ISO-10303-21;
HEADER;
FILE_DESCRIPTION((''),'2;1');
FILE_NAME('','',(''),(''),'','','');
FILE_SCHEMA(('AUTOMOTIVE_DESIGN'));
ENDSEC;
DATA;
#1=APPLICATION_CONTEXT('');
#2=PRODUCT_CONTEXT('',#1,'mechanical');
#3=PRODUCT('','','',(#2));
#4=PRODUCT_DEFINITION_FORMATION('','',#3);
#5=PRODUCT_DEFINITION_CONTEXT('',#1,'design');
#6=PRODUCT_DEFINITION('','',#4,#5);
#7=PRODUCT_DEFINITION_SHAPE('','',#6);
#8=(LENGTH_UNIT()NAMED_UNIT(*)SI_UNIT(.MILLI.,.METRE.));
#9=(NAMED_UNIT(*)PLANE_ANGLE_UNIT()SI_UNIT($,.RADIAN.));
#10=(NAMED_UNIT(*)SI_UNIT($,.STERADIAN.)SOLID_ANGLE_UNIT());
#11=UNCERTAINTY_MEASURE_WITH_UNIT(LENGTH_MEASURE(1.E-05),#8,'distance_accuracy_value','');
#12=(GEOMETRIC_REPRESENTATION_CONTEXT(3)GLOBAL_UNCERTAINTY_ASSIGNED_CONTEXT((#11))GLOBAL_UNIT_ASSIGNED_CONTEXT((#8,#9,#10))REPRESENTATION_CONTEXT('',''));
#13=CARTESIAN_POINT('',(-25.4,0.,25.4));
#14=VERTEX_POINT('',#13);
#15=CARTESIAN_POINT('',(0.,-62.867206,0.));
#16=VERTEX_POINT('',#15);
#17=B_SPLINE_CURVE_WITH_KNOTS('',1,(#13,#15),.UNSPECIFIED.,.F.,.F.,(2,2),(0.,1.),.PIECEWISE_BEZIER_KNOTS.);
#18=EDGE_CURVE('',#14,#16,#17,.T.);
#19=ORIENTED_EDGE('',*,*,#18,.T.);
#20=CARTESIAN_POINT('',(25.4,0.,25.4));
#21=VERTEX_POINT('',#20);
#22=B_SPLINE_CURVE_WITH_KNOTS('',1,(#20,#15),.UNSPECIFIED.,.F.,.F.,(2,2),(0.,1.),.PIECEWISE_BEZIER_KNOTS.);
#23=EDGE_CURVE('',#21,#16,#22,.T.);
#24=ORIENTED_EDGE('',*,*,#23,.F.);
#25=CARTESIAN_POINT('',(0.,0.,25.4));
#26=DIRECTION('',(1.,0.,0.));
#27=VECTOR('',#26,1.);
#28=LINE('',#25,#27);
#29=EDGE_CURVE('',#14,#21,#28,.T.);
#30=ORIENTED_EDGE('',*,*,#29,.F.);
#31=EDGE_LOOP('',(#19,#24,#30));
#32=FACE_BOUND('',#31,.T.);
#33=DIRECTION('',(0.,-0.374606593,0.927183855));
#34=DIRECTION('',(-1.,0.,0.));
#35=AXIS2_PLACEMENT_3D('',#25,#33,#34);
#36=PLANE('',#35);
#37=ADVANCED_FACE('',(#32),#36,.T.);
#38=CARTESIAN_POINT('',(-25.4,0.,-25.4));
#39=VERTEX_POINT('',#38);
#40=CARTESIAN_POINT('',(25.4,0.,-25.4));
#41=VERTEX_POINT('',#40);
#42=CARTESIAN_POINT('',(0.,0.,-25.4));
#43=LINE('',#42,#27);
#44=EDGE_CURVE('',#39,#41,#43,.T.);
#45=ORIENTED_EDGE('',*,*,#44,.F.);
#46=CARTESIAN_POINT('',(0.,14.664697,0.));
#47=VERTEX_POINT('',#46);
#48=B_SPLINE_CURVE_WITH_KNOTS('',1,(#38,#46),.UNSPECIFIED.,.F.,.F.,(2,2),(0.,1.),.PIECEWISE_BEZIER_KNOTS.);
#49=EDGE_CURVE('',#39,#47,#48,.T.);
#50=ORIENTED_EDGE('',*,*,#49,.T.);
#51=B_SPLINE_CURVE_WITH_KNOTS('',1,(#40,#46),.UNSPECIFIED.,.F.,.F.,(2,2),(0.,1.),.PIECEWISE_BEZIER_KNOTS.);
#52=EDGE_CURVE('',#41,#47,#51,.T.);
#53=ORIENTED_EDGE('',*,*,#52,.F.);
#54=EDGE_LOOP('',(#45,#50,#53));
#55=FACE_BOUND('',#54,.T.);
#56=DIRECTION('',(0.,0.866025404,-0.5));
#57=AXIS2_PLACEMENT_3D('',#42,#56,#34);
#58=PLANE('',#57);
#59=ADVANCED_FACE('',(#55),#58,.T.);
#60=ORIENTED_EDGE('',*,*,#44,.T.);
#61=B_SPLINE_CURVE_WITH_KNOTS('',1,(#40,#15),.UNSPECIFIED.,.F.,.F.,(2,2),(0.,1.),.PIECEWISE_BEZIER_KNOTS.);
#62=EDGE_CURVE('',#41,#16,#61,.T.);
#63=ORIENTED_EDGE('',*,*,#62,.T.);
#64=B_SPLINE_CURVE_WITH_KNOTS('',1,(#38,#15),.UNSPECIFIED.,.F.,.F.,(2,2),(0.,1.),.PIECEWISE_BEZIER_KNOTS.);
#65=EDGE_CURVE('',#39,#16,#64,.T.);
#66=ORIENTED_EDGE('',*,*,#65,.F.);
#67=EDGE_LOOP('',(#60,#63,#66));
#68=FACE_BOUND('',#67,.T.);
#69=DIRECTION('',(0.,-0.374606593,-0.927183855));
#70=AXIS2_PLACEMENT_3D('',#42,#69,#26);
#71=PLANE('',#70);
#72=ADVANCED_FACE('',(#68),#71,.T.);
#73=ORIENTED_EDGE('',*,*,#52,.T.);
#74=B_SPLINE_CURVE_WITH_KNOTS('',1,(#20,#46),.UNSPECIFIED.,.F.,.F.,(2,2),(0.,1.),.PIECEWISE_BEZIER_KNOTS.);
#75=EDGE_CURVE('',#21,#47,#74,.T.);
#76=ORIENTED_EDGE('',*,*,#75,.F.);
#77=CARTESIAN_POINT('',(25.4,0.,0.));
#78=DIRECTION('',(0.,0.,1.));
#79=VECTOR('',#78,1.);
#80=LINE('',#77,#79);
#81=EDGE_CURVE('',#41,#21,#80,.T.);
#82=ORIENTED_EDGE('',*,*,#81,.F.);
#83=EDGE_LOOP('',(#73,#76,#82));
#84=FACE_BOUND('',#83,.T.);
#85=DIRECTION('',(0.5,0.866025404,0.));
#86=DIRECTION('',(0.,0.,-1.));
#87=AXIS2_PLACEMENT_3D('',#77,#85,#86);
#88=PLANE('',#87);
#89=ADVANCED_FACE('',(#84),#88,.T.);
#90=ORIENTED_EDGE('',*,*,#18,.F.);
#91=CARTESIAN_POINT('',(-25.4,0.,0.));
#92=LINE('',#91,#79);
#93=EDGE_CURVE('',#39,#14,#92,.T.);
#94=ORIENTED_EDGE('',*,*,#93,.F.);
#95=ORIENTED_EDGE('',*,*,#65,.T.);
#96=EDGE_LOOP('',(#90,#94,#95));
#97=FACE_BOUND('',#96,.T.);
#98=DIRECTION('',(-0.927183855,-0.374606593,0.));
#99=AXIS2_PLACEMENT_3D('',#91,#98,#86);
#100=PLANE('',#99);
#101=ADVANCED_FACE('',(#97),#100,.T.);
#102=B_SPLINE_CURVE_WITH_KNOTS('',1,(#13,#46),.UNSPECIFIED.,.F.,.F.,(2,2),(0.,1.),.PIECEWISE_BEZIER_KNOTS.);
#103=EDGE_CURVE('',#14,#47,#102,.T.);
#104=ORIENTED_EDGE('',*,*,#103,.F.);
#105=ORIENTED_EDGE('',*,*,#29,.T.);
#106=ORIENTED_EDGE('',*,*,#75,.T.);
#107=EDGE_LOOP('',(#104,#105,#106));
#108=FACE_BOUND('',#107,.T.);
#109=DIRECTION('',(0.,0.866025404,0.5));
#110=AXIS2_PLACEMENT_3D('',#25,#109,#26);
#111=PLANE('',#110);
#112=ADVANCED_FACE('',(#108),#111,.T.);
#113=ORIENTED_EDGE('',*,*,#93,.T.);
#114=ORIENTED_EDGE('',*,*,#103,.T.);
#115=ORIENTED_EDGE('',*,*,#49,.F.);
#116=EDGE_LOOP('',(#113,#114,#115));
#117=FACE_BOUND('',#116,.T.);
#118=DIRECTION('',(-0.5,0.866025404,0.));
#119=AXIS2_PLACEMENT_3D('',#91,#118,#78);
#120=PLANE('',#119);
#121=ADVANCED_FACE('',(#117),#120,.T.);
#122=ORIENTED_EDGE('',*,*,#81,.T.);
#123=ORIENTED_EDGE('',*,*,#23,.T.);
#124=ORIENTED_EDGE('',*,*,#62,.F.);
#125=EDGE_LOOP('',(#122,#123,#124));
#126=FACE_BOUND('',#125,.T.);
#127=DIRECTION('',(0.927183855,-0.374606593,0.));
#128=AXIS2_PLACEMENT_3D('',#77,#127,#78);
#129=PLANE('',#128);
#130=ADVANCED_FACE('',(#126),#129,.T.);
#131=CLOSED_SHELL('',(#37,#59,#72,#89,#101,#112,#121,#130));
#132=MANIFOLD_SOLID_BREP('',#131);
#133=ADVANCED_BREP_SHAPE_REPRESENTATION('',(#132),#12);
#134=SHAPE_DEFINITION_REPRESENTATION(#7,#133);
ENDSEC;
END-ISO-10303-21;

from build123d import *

# Parameters (mm, degrees)
F0_W      = 50.8
F0_H      = 50.8
F1_FACE_W = 50.8
F1_FACE_H = 50.8


# Not quite as in the source:
# - an extrude whose draft closes it to a point is written as a loft to that point


with BuildPart() as f1:
    # F0 (on Front) → F1 section 0
    with BuildSketch(Plane.XZ, mode=Mode.PRIVATE) as f1_s0:
        Rectangle(F0_W, F0_H)
    loft([f1_s0.sketch, Vertex(0, -62.8672060768, 0)], ruled=True)

    # F1_face (on face) → F2 section 0
    with BuildSketch(Plane(origin=(0, 0, 0), x_dir=(1, 0, 0), z_dir=(0, 1, 0)), mode=Mode.PRIVATE) as f2_s0:
        Rectangle(F1_FACE_W, F1_FACE_H)
    loft([f2_s0.sketch, Vertex(0, 14.6646968374, 0)], ruled=True)


solid = f1.part
